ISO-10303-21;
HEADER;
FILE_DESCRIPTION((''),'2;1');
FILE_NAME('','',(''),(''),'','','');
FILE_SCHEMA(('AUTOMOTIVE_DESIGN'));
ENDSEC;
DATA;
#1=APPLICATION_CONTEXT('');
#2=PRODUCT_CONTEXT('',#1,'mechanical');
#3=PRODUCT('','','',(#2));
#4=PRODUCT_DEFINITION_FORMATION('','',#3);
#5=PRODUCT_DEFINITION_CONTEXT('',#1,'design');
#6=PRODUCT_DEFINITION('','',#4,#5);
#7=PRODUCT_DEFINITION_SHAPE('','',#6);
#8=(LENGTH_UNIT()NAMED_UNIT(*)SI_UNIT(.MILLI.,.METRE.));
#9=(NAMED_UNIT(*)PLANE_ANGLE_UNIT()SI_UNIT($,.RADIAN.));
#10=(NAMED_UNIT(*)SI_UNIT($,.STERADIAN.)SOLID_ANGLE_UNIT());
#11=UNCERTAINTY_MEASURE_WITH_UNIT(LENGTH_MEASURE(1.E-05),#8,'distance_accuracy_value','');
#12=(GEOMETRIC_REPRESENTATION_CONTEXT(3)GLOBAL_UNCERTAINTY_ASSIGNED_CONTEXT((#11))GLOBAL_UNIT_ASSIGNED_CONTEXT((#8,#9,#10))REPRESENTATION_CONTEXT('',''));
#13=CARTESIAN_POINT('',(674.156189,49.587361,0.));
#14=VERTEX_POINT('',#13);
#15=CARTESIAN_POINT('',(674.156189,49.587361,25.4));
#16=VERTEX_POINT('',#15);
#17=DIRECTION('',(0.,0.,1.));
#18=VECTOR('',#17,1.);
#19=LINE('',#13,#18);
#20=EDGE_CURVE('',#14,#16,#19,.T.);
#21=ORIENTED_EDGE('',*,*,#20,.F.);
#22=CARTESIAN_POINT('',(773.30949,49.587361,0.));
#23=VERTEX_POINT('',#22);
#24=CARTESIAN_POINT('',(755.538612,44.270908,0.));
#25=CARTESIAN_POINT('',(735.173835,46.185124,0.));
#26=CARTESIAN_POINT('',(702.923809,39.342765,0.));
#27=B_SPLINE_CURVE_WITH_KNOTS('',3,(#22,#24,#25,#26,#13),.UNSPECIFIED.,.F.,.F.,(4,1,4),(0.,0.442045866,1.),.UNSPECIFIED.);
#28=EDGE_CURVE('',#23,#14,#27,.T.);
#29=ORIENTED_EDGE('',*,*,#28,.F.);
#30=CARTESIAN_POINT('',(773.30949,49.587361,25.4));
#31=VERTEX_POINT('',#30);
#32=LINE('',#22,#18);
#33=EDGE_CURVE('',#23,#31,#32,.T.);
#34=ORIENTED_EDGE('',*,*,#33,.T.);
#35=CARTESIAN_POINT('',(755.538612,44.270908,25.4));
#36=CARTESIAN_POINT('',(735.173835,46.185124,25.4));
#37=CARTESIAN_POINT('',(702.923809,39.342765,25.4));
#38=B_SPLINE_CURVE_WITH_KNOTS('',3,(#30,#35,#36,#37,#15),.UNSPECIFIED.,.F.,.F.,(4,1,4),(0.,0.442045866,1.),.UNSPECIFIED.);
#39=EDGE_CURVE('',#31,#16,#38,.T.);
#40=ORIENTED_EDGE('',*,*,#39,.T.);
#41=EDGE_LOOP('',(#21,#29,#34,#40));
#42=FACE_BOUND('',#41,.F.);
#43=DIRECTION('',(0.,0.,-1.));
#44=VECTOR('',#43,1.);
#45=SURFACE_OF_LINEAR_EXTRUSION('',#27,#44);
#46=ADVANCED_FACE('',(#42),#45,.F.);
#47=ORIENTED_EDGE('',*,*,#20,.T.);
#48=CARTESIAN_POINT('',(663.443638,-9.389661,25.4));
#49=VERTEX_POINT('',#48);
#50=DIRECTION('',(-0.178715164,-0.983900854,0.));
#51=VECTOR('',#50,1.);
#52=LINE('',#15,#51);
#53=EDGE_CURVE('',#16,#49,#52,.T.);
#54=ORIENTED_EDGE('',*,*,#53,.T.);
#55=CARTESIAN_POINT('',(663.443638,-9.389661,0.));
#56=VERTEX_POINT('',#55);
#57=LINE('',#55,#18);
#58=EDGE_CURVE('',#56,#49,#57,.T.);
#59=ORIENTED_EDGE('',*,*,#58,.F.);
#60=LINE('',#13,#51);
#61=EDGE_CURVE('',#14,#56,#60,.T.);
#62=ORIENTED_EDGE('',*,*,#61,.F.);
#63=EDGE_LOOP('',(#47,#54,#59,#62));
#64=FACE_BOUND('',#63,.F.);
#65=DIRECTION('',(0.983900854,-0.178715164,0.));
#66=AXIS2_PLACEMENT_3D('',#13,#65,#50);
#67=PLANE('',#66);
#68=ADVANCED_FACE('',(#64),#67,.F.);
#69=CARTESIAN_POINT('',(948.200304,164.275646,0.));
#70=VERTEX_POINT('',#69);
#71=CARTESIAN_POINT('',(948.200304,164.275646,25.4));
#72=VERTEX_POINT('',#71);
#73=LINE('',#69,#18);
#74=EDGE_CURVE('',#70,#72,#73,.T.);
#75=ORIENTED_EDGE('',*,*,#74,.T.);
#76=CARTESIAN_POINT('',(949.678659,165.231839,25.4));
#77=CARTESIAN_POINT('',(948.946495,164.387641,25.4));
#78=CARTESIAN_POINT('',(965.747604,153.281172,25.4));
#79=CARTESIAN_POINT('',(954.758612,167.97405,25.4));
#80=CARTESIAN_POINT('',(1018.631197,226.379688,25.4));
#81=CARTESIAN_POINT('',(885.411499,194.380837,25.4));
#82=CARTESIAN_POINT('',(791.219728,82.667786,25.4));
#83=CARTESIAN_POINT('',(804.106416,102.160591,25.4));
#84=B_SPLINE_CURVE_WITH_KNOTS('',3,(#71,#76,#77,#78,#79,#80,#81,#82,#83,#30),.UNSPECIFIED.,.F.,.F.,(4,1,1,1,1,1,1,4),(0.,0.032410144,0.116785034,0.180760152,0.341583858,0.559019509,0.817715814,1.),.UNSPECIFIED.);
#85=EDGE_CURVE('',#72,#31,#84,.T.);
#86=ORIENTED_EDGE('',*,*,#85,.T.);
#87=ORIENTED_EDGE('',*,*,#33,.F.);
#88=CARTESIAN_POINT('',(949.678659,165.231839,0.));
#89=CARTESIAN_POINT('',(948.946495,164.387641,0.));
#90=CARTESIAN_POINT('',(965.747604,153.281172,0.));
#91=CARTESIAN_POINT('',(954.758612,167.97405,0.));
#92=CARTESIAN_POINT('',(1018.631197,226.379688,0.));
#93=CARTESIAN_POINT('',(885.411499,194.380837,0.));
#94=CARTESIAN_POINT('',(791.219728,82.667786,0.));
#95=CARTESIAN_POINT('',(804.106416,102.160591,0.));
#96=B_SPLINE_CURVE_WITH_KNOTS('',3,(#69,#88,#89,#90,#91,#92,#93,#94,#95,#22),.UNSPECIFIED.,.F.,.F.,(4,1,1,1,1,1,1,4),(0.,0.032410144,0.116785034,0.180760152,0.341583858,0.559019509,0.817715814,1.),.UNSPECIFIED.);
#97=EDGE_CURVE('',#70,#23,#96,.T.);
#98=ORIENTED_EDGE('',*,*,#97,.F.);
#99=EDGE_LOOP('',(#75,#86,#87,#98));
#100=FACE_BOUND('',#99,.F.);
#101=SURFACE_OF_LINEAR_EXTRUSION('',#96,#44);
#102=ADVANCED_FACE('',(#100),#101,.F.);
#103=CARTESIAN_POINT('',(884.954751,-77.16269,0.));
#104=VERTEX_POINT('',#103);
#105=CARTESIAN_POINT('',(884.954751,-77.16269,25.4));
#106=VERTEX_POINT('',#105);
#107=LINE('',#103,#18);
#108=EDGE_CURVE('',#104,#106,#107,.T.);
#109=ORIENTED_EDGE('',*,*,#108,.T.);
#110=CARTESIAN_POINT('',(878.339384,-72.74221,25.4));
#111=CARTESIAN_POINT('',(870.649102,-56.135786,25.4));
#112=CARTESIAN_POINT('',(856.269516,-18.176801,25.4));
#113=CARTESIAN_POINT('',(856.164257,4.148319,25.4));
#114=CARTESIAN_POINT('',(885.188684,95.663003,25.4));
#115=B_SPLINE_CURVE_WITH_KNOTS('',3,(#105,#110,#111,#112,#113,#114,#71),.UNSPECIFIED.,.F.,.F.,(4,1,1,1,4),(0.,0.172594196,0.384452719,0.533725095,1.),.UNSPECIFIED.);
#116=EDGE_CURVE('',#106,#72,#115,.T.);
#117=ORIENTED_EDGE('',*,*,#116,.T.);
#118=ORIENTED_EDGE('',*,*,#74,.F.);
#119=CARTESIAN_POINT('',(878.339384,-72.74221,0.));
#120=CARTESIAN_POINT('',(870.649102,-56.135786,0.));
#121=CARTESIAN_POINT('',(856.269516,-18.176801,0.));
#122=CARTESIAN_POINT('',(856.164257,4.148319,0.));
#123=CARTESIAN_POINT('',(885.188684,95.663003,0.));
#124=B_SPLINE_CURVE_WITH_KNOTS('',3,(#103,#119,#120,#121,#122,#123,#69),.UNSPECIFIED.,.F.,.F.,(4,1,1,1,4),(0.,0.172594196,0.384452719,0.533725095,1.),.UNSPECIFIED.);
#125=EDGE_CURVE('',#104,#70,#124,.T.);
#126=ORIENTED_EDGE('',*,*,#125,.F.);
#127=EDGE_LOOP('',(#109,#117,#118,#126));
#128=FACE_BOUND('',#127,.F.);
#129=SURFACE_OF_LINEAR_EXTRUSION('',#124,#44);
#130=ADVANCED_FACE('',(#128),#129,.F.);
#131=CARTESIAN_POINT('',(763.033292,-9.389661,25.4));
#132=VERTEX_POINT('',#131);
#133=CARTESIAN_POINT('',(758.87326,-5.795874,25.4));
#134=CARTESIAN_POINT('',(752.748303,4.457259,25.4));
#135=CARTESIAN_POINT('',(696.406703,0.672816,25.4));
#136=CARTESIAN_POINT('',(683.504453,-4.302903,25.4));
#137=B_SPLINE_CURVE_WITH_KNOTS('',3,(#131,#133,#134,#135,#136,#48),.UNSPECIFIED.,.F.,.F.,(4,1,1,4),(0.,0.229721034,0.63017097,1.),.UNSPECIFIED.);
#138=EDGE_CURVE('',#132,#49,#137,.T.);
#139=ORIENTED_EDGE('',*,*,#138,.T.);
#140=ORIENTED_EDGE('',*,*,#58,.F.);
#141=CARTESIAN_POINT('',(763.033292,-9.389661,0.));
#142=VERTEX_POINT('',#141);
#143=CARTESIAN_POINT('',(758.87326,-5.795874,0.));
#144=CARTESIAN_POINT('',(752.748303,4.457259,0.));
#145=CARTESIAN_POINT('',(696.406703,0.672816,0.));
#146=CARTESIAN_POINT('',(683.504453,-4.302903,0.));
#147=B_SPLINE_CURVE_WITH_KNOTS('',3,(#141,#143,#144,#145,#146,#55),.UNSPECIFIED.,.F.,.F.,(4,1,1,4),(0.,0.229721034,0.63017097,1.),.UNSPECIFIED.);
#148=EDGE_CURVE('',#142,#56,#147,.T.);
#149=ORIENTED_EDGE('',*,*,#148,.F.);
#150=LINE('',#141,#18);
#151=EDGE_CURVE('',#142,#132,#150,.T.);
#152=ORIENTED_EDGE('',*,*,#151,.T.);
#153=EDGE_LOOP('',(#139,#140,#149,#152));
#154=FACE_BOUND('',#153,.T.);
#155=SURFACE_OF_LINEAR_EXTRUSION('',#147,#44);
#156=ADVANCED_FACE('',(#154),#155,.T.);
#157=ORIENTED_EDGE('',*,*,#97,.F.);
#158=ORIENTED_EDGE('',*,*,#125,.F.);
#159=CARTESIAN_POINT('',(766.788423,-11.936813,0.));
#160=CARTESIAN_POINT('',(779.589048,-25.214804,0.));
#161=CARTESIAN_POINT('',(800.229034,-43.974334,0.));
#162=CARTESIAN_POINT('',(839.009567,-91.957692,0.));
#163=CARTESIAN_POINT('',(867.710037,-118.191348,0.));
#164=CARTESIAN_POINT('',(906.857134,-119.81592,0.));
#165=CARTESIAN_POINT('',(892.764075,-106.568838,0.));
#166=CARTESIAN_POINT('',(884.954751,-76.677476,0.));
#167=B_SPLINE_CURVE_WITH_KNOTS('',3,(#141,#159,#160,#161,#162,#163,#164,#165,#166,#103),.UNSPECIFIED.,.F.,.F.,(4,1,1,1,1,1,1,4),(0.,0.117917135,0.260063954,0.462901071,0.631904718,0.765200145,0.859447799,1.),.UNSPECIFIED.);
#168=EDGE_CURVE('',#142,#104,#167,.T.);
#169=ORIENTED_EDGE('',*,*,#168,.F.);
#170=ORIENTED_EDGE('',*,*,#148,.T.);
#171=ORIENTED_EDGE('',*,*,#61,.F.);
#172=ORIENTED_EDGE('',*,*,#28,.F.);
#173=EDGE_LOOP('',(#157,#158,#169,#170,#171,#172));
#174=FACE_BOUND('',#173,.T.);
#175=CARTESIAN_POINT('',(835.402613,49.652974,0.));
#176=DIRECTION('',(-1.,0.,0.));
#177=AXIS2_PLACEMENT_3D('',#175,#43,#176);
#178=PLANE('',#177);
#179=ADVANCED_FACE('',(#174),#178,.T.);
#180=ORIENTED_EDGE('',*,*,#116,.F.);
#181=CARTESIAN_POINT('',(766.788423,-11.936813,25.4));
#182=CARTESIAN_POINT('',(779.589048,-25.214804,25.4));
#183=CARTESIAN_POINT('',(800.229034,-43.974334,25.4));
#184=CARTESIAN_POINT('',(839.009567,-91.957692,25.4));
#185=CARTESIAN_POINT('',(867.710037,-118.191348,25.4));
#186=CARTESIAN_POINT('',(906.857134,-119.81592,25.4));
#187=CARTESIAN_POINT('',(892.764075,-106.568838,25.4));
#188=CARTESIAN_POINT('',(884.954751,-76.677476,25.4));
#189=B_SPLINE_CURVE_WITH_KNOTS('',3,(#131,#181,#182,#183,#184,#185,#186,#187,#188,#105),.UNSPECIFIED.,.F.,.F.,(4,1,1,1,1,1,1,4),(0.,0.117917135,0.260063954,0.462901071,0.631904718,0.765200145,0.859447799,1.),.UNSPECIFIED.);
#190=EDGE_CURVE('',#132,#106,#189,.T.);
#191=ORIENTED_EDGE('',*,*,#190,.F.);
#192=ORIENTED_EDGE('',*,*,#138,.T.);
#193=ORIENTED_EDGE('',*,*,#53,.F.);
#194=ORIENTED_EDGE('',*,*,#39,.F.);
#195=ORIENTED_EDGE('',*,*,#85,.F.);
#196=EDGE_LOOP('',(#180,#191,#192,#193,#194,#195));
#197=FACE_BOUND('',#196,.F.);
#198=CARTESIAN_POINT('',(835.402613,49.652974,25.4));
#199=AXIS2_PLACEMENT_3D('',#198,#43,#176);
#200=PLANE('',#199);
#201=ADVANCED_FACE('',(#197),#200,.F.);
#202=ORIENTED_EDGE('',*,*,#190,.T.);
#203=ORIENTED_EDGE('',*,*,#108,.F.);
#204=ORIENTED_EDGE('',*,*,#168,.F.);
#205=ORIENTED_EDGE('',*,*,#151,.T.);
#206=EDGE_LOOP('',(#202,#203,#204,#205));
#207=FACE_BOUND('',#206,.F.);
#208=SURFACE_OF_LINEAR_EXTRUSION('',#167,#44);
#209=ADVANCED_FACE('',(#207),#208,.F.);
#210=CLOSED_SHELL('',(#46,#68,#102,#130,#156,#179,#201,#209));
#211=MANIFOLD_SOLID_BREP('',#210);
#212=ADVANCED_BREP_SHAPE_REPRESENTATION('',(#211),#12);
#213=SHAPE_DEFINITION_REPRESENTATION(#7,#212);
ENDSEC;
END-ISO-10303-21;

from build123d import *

# Parameters (mm, degrees)
F1_DEPTH = 25.4


with BuildPart() as f1:
    # F0 (on Top) → F1 (new body)
    with BuildSketch(Plane.XY):
        with BuildLine():
            add(Edge.make_bspline(
                [(763.0332921978, -9.3896612425), (758.8732603057, -5.7958741093), (752.748302509, 4.4572593378), (696.4067030942, 0.6728158791), (683.5044525744, -4.3029026677), (663.4436377218, -9.3896612425)],
                knots=[0, 0, 0, 0, 0.2297210344, 0.63017097, 1, 1, 1, 1], degree=3))
            add(Edge.make_bspline(
                [(763.0332921978, -9.3896612425), (766.7884226576, -11.9368133928), (779.5890477216, -25.2148041632), (800.2290337642, -43.9743335152), (839.0095670245, -91.9576915528), (867.7100367018, -118.1913476961), (906.8571338402, -119.815920499), (892.7640754987, -106.5688383093), (884.9547505379, -76.6774757721), (884.9547505379, -77.1626904607)],
                knots=[0, 0, 0, 0, 0.1179171354, 0.2600639543, 0.4629010708, 0.6319047181, 0.7652001452, 0.8594477992, 1, 1, 1, 1], degree=3))
            add(Edge.make_bspline(
                [(884.9547505379, -77.1626904607), (878.3393838169, -72.742209961), (870.6491021392, -56.1357861732), (856.2695164987, -18.1768013701), (856.1642570221, 4.1483188267), (885.188683908, 95.6630026172), (948.2003044353, 164.2756462097)],
                knots=[0, 0, 0, 0, 0.1725941963, 0.3844527192, 0.5337250947, 1, 1, 1, 1], degree=3))
            add(Edge.make_bspline(
                [(948.2003044353, 164.2756462097), (949.6786594391, 165.2318388224), (948.9464949683, 164.3876408494), (965.7476039449, 153.2811721488), (954.758612186, 167.9740501467), (1018.6311971569, 226.3796883651), (885.4114990535, 194.3808367453), (791.2197277599, 82.6677856639), (804.1064157523, 102.1605908318), (773.3094898025, 49.58736149)],
                knots=[0, 0, 0, 0, 0.032410144, 0.1167850345, 0.1807601525, 0.341583858, 0.5590195094, 0.8177158141, 1, 1, 1, 1], degree=3))
            add(Edge.make_bspline(
                [(773.3094898025, 49.58736149), (755.538612277, 44.2709080376), (735.1738345899, 46.185123763), (702.9238090782, 39.3427649071), (674.1561889648, 49.58736149)],
                knots=[0, 0, 0, 0, 0.4420458662, 1, 1, 1, 1], degree=3))
            Line((674.1561889648, 49.58736149), (663.4436377218, -9.3896612425))
        make_face()
    extrude(amount=F1_DEPTH)


solid = f1.part
